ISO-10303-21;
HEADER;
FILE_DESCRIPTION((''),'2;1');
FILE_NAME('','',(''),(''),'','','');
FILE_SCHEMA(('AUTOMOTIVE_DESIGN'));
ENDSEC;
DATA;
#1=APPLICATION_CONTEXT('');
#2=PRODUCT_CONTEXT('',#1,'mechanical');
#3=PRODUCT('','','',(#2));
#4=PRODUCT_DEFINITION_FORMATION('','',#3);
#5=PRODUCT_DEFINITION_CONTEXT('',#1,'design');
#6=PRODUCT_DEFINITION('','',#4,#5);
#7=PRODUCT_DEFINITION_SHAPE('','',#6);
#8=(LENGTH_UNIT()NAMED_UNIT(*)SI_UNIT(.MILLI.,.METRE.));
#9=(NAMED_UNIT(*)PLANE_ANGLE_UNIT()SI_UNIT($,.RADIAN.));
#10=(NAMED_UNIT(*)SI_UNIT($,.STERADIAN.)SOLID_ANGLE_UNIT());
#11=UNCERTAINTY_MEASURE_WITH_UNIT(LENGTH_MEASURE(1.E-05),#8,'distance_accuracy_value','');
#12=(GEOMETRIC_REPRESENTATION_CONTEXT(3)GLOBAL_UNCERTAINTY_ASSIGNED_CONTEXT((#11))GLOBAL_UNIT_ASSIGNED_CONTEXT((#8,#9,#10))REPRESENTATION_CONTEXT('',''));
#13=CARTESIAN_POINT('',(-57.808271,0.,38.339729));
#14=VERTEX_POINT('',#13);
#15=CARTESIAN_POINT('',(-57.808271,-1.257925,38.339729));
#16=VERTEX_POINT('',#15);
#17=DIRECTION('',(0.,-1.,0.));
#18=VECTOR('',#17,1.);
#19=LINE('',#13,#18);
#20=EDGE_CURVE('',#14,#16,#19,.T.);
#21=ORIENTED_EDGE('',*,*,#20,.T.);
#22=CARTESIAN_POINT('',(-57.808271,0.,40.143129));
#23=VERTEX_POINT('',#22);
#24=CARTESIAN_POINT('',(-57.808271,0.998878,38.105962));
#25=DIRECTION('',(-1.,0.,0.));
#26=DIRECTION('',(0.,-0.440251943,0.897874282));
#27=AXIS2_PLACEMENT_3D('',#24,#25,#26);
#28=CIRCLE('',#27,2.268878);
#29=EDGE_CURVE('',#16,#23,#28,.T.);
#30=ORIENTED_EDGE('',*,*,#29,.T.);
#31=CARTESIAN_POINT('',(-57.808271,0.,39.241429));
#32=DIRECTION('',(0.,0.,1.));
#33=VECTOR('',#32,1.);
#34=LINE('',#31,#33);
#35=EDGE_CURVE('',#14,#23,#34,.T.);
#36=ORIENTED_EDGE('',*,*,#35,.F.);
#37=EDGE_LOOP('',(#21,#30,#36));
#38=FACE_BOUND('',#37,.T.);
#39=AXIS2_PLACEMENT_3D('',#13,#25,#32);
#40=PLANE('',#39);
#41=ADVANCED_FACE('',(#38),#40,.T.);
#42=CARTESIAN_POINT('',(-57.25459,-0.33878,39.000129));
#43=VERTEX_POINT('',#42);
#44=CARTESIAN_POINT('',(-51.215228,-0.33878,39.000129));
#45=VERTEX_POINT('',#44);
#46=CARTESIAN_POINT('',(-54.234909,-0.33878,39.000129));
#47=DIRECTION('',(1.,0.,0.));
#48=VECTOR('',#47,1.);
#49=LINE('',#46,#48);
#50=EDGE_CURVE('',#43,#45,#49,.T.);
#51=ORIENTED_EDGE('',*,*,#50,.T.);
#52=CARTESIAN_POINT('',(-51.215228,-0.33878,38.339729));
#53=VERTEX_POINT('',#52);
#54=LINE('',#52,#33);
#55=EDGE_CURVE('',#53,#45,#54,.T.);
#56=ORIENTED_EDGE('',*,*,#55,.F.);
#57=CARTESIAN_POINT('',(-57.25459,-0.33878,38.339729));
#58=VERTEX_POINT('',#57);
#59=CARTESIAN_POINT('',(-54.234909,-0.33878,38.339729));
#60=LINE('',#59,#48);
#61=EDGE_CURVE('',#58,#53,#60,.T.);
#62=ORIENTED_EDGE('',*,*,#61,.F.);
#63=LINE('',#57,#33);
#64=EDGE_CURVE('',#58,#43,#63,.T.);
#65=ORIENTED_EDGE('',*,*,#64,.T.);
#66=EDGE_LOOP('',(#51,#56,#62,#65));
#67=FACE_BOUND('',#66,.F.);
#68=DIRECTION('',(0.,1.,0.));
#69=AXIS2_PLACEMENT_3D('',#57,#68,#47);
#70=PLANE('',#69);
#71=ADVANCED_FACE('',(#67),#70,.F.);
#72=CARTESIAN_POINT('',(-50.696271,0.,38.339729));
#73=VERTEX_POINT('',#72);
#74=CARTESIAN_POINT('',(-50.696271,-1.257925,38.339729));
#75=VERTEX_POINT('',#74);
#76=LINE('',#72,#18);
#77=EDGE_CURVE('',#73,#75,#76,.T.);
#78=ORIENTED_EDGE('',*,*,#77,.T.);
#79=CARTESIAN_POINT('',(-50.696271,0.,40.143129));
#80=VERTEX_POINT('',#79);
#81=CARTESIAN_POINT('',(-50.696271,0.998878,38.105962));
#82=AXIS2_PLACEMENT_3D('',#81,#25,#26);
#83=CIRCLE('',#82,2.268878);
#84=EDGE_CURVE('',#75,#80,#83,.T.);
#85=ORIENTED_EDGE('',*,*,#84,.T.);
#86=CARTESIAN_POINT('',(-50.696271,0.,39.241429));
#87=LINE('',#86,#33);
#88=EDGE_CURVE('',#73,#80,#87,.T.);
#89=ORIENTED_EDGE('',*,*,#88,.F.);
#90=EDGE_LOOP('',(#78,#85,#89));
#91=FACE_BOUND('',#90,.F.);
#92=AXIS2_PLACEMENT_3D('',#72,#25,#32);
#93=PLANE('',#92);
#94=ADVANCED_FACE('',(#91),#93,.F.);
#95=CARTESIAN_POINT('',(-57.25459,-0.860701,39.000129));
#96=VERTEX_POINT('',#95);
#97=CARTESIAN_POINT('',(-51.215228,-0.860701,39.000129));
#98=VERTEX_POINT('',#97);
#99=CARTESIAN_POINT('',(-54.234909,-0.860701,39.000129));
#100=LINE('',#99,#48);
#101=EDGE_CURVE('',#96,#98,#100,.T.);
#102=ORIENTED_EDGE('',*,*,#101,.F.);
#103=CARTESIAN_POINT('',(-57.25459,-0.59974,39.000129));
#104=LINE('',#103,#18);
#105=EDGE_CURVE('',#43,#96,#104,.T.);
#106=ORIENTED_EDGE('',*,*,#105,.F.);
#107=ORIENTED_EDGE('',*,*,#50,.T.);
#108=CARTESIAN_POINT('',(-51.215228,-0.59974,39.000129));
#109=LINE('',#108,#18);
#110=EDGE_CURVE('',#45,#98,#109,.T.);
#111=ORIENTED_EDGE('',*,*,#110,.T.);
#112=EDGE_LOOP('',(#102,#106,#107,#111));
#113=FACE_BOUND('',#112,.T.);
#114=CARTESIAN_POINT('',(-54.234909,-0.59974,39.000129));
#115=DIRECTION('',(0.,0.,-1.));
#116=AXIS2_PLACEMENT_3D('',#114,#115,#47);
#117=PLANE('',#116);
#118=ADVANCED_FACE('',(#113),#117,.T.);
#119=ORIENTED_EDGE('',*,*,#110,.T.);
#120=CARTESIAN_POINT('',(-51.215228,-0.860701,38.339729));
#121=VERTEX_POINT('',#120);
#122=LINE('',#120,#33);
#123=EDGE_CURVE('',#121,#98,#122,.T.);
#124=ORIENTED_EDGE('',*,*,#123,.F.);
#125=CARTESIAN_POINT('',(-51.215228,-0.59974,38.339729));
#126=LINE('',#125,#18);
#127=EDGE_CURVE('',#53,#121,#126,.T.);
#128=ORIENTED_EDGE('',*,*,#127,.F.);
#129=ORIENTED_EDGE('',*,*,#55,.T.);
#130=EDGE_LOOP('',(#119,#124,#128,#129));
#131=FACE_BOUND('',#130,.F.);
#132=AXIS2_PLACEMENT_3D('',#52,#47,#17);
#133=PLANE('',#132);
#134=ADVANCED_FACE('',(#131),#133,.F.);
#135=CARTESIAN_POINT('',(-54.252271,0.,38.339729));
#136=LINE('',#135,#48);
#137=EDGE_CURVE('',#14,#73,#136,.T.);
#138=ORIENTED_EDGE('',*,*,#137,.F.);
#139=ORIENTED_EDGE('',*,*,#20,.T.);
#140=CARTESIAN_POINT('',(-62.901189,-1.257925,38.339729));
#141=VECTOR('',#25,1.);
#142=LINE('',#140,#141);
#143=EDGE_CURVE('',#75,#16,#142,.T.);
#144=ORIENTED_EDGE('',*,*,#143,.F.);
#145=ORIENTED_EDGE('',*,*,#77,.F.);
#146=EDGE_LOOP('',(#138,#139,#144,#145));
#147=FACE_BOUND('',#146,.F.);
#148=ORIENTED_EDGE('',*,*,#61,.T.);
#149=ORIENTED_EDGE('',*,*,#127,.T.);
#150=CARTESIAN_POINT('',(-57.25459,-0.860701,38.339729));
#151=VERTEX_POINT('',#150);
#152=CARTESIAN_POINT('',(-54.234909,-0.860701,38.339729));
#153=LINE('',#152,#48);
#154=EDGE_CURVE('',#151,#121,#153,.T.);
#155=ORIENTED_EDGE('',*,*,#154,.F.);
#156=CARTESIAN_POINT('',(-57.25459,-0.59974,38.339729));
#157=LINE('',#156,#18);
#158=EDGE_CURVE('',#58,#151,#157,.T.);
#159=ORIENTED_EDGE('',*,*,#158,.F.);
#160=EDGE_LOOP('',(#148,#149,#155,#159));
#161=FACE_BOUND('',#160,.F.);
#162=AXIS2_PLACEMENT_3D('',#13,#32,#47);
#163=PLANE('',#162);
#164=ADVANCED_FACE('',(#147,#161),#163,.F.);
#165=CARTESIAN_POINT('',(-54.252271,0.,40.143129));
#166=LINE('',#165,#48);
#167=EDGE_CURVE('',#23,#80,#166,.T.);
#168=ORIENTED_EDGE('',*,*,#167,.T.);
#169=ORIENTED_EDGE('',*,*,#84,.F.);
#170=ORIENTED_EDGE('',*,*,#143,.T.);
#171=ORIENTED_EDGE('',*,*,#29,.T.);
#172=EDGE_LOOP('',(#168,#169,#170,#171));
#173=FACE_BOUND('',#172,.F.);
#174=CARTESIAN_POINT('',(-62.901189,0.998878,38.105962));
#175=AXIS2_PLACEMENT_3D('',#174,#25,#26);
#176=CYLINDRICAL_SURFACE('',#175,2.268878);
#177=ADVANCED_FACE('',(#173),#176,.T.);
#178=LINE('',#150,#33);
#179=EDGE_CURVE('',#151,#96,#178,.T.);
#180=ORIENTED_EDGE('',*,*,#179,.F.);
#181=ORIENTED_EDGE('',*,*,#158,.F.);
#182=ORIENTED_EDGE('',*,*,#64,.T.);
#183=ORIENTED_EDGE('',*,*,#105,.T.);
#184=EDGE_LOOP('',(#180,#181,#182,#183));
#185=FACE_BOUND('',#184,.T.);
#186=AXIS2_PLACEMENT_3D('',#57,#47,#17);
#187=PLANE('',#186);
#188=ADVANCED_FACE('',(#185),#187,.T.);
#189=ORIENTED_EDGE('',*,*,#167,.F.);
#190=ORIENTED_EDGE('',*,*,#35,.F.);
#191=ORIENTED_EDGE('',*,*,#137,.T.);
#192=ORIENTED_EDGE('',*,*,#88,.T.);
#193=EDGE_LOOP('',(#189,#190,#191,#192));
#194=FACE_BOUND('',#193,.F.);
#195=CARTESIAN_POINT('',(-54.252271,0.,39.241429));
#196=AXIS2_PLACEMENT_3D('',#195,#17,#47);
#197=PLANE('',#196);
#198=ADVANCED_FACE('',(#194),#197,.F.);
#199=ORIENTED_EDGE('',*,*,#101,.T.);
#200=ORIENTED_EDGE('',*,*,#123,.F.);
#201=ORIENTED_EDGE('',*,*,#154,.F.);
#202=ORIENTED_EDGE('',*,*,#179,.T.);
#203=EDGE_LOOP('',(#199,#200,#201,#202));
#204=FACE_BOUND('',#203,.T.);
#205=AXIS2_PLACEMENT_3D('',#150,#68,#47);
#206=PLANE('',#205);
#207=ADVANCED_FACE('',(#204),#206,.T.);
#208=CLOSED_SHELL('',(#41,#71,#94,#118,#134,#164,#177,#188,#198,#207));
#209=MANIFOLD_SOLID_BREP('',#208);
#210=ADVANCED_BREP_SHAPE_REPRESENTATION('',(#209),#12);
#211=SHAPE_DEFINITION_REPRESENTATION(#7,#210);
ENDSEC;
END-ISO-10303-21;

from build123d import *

# Parameters (mm, degrees)
F0_W        = 7.112
F0_H        = 1.8034
F1_DEPTH    = 1.27
F2_W        = 6.0393624008
F2_H        = 0.5219200684
F3_DEPTH    = 0.6604
F4_T1_DEPTH = 17.2978356076


# Not quite as in the source:
# - a fillet or chamfer that OpenCascade refuses, or shapes differently, is made with other operations: its cross-section is extruded or revolved along the edge and cut away or added


with BuildPart() as f1:
    # F0 (on Front) → F1 (new body)
    with BuildSketch(Plane.XZ):
        with Locations((-54.2522707031, 39.2414294181)):
            Rectangle(F0_W, F0_H)
    extrude(amount=F1_DEPTH)

    # F2 (on face) → F3 (cut)
    with BuildSketch(Plane(origin=(0, 0, 38.3397294181), x_dir=(1, 0, 0), z_dir=(0, 0, -1))):
        with Locations((-54.2349088937, 0.599740466)):
            Rectangle(F2_W, F2_H)
    extrude(amount=-F3_DEPTH, mode=Mode.SUBTRACT)

    # F4: fillet of radius 2.2688779059 on 1 edges, made by hand

    # F4_s2 → F4_t1 (cut)
    with BuildSketch(Plane.YZ.offset(-62.9011885069)):
        with BuildLine():
            ThreePointArc((0, 40.1431294181), (-0.9264972476, 39.3062695365), (-1.27, 38.1059622966))
            Line((-1.27, 38.1059622966), (-1.27, 40.1431294181))
            Line((-1.27, 40.1431294181), (0, 40.1431294181))
        make_face()
    extrude(amount=F4_T1_DEPTH, mode=Mode.SUBTRACT)


solid = f1.part
